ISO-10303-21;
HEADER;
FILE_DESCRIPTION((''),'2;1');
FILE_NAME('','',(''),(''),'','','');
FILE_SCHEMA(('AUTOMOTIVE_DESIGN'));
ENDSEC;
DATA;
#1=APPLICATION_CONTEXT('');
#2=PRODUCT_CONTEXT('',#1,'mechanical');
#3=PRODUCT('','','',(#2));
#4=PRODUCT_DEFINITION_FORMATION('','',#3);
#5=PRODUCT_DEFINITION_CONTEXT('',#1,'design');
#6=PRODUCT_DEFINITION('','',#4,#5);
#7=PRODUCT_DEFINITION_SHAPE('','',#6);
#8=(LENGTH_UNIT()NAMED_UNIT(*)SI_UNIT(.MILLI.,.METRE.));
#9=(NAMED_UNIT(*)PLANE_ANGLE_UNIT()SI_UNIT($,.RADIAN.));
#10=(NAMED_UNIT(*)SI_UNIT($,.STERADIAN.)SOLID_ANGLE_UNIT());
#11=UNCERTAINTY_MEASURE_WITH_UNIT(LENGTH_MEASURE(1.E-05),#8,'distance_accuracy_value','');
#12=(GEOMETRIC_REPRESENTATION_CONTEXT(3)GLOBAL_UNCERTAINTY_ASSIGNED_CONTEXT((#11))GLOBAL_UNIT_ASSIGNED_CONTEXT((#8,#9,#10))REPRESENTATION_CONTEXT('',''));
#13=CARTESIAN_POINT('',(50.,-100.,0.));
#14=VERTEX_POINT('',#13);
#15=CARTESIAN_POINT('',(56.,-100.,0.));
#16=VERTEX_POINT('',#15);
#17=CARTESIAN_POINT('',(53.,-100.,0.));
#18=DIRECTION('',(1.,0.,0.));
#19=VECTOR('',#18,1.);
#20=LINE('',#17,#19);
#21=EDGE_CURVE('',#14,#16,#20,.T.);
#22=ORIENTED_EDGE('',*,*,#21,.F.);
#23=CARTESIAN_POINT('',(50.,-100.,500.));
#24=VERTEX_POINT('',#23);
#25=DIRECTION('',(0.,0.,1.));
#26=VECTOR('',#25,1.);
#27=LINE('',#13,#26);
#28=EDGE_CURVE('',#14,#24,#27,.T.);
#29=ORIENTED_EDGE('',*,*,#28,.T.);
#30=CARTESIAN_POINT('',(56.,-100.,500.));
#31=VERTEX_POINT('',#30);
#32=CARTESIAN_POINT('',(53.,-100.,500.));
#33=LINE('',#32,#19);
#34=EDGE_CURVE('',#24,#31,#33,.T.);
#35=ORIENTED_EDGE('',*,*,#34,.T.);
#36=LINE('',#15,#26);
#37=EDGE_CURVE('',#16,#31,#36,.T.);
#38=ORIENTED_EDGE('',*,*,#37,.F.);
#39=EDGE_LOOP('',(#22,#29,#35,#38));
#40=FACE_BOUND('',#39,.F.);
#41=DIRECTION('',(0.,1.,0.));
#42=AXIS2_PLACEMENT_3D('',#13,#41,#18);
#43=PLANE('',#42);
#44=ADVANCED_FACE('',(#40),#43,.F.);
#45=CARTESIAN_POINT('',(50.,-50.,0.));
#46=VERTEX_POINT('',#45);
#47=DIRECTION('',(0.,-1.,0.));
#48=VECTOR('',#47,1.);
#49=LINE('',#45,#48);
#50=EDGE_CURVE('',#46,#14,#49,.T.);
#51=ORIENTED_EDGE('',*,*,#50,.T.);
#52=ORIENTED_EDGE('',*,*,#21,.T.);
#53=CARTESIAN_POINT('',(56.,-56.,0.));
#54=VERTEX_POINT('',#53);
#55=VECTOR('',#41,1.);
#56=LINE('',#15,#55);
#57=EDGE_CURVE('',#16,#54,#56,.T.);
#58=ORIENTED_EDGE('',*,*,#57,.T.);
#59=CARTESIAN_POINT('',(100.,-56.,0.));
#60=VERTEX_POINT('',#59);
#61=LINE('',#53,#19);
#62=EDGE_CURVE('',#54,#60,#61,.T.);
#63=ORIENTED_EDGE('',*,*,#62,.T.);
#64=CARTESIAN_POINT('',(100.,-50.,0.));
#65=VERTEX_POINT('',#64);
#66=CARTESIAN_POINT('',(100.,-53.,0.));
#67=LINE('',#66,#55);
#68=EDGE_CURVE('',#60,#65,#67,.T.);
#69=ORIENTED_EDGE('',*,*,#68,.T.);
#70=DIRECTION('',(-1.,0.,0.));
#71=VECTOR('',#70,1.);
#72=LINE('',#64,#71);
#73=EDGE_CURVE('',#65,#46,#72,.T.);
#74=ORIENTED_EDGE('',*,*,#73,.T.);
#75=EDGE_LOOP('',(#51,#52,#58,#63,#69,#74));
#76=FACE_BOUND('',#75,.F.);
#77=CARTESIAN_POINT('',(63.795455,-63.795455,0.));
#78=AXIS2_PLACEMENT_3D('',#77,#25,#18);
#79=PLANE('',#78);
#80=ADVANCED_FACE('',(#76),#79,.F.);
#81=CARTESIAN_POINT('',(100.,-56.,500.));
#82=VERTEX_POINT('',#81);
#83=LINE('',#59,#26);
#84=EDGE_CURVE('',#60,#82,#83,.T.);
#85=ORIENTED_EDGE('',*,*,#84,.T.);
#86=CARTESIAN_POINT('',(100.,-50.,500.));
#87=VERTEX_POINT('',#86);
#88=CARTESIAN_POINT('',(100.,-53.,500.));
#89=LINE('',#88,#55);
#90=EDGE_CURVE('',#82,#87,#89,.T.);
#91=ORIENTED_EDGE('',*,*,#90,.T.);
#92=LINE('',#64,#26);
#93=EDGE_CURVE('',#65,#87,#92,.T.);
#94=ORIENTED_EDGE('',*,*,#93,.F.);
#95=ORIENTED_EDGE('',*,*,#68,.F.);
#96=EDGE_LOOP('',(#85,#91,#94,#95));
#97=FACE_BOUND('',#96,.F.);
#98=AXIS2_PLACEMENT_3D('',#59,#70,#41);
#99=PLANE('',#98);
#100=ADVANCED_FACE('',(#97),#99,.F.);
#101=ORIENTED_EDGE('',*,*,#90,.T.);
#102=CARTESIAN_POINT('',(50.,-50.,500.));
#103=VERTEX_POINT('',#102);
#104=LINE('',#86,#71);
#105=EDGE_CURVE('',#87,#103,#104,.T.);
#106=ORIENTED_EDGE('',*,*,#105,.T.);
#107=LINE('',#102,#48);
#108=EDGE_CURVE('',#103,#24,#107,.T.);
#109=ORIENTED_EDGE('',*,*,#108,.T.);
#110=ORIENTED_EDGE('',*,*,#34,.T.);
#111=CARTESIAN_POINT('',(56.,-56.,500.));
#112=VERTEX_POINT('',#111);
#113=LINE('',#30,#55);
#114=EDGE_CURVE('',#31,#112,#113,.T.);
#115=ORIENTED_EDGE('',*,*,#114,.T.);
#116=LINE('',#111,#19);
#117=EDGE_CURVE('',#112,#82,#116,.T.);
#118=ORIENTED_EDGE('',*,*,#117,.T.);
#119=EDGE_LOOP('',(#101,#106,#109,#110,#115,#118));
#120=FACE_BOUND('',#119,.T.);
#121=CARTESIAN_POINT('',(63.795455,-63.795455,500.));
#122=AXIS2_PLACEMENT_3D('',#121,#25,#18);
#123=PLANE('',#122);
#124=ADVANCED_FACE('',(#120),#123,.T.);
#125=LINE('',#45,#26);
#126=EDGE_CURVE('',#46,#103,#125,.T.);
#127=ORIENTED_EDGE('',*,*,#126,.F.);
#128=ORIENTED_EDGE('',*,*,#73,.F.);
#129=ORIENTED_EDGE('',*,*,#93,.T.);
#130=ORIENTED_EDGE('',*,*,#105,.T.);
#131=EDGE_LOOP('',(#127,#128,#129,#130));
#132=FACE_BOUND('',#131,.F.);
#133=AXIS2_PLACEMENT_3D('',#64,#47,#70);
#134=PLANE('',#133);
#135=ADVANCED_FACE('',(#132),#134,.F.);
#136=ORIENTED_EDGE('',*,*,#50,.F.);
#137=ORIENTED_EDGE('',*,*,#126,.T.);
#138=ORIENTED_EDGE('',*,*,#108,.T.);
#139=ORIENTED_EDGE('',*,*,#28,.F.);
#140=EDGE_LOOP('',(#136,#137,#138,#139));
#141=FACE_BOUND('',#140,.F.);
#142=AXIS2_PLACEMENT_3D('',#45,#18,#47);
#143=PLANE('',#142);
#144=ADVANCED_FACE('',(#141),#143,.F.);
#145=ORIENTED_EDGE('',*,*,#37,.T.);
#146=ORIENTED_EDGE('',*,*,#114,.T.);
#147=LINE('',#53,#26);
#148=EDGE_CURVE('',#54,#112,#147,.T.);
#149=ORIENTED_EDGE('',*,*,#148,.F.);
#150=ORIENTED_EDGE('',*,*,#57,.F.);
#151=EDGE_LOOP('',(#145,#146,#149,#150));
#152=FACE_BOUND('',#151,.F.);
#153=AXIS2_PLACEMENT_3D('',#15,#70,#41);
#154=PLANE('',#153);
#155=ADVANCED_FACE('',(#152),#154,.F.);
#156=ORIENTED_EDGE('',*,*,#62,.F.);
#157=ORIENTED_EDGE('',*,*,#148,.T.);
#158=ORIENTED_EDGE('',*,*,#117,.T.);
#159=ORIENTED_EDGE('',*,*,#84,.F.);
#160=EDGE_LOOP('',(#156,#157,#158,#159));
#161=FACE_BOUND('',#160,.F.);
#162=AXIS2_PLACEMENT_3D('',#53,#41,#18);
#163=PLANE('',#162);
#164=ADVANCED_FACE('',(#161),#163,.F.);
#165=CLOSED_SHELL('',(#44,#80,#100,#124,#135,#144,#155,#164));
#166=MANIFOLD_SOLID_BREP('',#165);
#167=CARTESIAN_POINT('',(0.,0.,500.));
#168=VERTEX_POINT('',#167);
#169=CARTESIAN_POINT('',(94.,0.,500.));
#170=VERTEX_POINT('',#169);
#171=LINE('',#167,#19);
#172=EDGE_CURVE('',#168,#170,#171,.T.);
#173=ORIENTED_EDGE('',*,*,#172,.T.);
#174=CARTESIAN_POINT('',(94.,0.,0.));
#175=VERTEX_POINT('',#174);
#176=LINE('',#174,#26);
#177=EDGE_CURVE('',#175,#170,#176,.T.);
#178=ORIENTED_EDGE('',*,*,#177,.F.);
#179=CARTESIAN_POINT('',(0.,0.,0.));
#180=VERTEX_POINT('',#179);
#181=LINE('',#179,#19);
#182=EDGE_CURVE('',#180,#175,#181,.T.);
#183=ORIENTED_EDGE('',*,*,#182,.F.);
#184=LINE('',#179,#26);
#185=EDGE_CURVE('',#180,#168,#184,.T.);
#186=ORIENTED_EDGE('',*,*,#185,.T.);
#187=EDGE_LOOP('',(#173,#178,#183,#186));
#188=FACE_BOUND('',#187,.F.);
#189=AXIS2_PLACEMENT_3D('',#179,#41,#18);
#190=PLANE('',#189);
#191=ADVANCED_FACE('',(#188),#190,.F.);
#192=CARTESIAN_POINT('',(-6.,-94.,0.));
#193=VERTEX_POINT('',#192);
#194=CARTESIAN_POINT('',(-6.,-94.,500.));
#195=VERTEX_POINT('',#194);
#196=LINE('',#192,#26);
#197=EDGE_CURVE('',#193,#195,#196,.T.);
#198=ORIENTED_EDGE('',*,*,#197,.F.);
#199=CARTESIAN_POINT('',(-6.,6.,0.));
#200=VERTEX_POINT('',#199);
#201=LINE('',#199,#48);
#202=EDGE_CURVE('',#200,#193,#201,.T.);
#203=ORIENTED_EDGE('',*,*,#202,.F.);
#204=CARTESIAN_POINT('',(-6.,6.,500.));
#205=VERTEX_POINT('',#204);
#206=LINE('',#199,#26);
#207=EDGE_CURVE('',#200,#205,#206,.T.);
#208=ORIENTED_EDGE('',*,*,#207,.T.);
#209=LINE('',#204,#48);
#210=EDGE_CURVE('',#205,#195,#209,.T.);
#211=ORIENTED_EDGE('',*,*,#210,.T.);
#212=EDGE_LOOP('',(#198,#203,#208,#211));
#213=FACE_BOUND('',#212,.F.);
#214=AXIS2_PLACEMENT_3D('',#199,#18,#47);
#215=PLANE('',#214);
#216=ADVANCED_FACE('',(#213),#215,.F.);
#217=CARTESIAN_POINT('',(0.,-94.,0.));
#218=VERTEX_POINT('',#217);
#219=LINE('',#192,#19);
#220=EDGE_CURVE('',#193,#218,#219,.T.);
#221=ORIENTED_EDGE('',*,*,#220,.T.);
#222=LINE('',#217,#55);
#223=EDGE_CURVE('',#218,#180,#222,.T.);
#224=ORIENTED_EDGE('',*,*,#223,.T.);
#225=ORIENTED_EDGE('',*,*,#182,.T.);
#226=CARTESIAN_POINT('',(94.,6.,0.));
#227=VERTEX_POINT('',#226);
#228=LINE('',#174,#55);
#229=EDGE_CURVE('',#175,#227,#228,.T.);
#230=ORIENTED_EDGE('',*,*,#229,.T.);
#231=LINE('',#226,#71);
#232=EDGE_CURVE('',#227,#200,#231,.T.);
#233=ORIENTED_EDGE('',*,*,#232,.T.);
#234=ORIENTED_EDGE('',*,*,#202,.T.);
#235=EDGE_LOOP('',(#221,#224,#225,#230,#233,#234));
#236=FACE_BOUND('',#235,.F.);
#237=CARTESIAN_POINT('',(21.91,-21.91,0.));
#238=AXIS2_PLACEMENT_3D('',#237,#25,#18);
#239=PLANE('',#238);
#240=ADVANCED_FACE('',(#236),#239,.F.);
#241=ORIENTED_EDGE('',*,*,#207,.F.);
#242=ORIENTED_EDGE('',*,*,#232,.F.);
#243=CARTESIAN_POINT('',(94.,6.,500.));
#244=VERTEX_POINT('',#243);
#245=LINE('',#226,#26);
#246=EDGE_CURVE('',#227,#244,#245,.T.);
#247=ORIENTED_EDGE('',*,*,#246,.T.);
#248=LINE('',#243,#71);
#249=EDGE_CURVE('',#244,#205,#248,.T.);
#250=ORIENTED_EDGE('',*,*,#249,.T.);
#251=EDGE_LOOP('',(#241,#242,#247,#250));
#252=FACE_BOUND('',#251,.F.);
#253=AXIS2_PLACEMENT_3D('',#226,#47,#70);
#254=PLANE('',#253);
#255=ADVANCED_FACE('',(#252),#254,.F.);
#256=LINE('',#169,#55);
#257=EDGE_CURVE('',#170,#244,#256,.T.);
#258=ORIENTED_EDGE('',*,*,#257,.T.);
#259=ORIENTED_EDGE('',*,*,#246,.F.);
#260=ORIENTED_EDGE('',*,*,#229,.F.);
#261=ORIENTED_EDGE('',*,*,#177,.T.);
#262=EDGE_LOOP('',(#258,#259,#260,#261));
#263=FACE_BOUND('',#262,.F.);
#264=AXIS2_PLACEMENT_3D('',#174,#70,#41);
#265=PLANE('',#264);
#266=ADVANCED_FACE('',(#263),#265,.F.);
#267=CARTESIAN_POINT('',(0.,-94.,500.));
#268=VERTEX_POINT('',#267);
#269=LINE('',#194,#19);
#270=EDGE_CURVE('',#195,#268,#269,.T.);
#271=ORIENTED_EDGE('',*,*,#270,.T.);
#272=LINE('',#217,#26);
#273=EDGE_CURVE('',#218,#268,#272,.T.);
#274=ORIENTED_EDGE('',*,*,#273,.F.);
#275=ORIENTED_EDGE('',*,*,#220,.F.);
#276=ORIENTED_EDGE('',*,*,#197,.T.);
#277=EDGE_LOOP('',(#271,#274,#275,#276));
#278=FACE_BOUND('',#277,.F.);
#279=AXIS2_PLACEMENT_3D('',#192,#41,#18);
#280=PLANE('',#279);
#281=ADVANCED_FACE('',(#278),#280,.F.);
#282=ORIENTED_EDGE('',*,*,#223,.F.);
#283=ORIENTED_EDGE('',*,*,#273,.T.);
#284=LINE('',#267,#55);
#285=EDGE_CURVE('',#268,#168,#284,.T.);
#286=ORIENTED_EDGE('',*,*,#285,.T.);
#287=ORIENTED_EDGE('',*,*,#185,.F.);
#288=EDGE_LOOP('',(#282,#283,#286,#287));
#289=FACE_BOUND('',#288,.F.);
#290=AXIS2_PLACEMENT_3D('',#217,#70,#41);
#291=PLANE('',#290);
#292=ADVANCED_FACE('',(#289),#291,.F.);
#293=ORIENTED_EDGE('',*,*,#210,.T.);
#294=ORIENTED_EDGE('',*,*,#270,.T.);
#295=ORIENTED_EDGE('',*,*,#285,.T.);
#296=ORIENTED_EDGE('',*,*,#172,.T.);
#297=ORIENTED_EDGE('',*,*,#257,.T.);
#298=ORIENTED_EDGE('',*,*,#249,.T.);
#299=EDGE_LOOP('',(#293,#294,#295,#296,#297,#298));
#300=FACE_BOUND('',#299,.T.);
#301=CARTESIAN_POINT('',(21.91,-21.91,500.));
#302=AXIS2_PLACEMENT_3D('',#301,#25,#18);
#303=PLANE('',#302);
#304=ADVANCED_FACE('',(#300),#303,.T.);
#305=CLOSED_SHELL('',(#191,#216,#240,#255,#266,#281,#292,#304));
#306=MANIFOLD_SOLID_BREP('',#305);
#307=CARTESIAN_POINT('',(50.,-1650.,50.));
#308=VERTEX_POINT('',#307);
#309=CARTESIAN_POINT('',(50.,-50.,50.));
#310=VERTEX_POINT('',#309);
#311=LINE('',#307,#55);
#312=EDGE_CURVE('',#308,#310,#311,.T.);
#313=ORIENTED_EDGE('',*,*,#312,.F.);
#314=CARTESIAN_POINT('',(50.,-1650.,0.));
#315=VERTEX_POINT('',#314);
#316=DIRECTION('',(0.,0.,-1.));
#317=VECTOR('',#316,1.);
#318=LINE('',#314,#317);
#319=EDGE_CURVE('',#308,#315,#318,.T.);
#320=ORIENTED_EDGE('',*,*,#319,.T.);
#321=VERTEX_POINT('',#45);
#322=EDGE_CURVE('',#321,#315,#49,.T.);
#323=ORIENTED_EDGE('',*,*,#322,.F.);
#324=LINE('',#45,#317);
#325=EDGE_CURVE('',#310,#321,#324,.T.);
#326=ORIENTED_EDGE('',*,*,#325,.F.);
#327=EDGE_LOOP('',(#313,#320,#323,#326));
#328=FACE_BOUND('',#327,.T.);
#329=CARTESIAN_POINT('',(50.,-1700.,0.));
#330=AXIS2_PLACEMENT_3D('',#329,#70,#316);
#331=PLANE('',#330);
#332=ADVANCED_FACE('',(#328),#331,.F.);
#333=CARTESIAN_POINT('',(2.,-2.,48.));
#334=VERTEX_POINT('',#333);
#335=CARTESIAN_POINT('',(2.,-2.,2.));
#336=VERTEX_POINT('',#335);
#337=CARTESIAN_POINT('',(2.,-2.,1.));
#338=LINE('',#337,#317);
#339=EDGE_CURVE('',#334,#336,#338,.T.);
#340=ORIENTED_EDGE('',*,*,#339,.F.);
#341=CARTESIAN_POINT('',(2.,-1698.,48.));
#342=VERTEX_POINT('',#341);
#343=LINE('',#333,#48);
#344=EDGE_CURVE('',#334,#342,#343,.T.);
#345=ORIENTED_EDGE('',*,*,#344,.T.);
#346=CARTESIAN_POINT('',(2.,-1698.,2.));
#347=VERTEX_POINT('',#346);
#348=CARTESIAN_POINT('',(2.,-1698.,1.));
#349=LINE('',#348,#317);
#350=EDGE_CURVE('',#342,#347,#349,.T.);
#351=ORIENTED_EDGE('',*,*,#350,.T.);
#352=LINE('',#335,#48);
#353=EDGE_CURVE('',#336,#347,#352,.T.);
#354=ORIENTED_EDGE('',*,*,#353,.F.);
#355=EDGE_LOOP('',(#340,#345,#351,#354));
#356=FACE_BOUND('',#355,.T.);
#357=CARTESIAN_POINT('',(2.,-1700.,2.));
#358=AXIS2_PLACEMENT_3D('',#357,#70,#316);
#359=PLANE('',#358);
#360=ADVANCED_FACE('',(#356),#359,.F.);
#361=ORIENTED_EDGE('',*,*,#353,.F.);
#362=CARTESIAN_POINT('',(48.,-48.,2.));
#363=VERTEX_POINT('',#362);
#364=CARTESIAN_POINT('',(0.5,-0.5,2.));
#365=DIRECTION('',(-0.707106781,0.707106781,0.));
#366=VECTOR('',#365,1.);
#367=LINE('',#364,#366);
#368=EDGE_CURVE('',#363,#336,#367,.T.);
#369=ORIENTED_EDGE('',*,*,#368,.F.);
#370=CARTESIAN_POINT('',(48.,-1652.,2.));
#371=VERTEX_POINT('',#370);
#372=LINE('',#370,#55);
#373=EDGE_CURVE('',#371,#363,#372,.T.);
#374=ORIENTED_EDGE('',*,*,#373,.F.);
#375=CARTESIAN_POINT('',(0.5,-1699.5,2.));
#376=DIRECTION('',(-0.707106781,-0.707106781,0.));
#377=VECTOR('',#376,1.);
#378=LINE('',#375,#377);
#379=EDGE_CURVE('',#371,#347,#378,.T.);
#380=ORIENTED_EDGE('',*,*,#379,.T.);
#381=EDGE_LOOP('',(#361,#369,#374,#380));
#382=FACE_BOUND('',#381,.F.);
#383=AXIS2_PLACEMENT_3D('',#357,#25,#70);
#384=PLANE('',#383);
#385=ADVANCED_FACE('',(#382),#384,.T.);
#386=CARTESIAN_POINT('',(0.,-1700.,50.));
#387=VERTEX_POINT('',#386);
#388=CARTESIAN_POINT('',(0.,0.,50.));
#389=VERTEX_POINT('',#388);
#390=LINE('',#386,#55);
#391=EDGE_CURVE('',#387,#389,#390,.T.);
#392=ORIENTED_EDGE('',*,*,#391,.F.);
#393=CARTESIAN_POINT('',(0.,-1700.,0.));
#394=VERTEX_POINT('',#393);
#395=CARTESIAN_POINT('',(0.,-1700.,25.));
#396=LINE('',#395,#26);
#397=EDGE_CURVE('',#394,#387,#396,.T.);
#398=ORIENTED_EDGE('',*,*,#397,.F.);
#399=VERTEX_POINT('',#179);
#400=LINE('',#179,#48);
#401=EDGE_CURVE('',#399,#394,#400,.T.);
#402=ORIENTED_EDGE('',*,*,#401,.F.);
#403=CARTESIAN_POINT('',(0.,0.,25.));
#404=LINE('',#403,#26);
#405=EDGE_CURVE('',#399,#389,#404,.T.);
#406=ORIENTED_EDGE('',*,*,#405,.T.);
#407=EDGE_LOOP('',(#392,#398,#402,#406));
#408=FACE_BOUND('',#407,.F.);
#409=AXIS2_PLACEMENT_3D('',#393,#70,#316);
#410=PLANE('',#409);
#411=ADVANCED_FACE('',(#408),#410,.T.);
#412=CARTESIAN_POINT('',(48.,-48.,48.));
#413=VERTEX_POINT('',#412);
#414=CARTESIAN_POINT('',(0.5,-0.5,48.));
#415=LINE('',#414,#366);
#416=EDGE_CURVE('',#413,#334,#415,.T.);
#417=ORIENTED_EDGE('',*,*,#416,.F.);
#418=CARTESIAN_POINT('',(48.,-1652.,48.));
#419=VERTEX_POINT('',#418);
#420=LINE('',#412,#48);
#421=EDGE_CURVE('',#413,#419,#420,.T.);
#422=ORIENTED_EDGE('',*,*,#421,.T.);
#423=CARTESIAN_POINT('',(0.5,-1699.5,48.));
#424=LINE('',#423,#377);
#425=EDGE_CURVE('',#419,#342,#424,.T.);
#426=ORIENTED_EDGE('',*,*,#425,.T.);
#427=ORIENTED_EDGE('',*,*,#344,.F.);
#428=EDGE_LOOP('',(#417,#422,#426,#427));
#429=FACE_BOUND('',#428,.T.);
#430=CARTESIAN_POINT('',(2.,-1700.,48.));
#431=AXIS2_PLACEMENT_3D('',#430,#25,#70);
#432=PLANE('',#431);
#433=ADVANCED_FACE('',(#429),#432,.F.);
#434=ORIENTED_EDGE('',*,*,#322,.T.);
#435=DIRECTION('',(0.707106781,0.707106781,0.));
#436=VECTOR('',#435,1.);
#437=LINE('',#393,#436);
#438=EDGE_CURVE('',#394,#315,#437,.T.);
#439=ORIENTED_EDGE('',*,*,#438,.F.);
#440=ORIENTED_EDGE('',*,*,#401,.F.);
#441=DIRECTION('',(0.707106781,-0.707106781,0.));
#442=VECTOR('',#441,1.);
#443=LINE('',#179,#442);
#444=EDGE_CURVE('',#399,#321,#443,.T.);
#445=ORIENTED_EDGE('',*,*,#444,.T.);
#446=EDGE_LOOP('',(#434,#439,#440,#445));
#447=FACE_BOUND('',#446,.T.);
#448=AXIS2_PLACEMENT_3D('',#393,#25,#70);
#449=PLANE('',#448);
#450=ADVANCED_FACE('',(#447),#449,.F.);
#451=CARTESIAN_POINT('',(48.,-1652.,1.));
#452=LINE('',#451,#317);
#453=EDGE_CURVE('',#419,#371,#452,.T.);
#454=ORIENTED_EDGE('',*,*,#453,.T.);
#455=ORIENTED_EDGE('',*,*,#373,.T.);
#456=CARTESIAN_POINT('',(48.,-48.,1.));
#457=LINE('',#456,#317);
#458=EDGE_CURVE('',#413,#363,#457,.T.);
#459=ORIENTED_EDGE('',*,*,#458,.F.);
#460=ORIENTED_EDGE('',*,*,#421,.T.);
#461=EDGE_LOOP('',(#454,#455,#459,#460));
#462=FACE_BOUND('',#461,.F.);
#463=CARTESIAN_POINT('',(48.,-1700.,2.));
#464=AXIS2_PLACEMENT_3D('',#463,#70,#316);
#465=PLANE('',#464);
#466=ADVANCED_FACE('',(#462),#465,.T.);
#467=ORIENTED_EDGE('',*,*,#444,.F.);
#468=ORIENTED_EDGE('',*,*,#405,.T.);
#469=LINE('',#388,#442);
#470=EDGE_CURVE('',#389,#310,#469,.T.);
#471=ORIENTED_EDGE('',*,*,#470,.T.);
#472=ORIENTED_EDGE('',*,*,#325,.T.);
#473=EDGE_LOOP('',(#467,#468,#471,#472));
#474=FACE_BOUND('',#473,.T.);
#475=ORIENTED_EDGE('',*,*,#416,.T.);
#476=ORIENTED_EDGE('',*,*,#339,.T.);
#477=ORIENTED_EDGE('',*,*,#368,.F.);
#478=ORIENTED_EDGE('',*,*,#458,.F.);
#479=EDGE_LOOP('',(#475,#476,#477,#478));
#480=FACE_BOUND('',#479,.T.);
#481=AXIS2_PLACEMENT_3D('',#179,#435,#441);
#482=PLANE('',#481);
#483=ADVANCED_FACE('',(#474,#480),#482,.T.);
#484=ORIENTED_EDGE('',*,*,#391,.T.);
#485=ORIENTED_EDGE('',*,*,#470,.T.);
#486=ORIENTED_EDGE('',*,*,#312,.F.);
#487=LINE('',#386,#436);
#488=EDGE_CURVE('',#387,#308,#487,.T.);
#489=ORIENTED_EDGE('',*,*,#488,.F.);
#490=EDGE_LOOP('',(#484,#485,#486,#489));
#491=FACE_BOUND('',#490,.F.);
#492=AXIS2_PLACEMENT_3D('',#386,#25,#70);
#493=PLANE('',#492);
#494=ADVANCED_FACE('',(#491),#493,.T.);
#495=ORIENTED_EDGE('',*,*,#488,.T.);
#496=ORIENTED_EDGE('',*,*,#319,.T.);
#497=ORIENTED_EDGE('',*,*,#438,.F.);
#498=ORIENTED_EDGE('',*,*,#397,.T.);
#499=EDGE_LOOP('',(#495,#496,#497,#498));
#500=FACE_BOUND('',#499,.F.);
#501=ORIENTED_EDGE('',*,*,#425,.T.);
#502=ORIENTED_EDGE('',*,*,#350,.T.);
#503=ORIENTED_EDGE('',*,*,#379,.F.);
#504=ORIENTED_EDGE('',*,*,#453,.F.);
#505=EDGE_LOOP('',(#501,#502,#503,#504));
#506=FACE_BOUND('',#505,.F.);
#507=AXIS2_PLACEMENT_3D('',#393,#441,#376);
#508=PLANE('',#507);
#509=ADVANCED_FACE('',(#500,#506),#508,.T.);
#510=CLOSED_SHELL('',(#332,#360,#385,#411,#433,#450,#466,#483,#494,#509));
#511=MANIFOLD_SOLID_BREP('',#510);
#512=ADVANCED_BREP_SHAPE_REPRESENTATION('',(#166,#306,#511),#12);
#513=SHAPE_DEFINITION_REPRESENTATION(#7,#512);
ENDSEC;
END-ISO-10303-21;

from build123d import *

# Parameters (mm, degrees)
F5_DEPTH = 50
F4_W     = 50
F4_H     = 50
F4_W_2   = 46
F4_H_2   = 46
F1_DEPTH = 850
F3_W     = 6
F3_H     = 6
F7_DEPTH = 500


# Not quite as in the source:
# - a feature names something its author has since deleted; it is built from what else it names


with BuildPart() as f5:
    # F0 (on Top) → F5 (new body)
    with BuildSketch(Plane.XY):
        Polygon((51, 0), (0, 0), (25.5, -25.5), align=None)
        Polygon((51, -51), (51, 0), (25.5, -25.5), align=None)
    extrude(amount=F5_DEPTH)


with BuildPart() as f1:
    # F4 (on Front) → F1 (new body)
    with BuildSketch(Plane.XZ):
        with Locations((25, 25)):
            Rectangle(F4_W, F4_H)
        with Locations((25, 25)):
            Rectangle(F4_W_2, F4_H_2, mode=Mode.SUBTRACT)
    extrude(amount=F1_DEPTH)

    # F2: cut F5
    add(f5.part, mode=Mode.SUBTRACT)

    # F6: F1 across face


with BuildPart() as f1_1:
    add(f1.part)
    add(f1.part.mirror(Plane(origin=(25, -850, 25), x_dir=(1, 0, 0), z_dir=(0, -1, 0))))


with BuildPart() as f7:
    # F3 (on Top) → F7 (new body)
    with BuildSketch(Plane.XY):
        Polygon((94, -56), (94, -50), (50, -50), (50, -94), (56, -94), (56, -56), align=None)
        with Locations((53, -97)):
            Rectangle(F3_W, F3_H)
        with Locations((97, -53)):
            Rectangle(F3_W, F3_H)
    extrude(amount=F7_DEPTH)


with BuildPart() as f7b:
    # F3 (on Top) → F7, piece 2 (new body)
    with BuildSketch(Plane.XY):
        Polygon((0, -94), (0, 0), (94, 0), (94, 6), (-6, 6), (-6, -94), align=None)
    extrude(amount=F7_DEPTH)


solid = Compound([f1_1.part, f7.part, f7b.part])
